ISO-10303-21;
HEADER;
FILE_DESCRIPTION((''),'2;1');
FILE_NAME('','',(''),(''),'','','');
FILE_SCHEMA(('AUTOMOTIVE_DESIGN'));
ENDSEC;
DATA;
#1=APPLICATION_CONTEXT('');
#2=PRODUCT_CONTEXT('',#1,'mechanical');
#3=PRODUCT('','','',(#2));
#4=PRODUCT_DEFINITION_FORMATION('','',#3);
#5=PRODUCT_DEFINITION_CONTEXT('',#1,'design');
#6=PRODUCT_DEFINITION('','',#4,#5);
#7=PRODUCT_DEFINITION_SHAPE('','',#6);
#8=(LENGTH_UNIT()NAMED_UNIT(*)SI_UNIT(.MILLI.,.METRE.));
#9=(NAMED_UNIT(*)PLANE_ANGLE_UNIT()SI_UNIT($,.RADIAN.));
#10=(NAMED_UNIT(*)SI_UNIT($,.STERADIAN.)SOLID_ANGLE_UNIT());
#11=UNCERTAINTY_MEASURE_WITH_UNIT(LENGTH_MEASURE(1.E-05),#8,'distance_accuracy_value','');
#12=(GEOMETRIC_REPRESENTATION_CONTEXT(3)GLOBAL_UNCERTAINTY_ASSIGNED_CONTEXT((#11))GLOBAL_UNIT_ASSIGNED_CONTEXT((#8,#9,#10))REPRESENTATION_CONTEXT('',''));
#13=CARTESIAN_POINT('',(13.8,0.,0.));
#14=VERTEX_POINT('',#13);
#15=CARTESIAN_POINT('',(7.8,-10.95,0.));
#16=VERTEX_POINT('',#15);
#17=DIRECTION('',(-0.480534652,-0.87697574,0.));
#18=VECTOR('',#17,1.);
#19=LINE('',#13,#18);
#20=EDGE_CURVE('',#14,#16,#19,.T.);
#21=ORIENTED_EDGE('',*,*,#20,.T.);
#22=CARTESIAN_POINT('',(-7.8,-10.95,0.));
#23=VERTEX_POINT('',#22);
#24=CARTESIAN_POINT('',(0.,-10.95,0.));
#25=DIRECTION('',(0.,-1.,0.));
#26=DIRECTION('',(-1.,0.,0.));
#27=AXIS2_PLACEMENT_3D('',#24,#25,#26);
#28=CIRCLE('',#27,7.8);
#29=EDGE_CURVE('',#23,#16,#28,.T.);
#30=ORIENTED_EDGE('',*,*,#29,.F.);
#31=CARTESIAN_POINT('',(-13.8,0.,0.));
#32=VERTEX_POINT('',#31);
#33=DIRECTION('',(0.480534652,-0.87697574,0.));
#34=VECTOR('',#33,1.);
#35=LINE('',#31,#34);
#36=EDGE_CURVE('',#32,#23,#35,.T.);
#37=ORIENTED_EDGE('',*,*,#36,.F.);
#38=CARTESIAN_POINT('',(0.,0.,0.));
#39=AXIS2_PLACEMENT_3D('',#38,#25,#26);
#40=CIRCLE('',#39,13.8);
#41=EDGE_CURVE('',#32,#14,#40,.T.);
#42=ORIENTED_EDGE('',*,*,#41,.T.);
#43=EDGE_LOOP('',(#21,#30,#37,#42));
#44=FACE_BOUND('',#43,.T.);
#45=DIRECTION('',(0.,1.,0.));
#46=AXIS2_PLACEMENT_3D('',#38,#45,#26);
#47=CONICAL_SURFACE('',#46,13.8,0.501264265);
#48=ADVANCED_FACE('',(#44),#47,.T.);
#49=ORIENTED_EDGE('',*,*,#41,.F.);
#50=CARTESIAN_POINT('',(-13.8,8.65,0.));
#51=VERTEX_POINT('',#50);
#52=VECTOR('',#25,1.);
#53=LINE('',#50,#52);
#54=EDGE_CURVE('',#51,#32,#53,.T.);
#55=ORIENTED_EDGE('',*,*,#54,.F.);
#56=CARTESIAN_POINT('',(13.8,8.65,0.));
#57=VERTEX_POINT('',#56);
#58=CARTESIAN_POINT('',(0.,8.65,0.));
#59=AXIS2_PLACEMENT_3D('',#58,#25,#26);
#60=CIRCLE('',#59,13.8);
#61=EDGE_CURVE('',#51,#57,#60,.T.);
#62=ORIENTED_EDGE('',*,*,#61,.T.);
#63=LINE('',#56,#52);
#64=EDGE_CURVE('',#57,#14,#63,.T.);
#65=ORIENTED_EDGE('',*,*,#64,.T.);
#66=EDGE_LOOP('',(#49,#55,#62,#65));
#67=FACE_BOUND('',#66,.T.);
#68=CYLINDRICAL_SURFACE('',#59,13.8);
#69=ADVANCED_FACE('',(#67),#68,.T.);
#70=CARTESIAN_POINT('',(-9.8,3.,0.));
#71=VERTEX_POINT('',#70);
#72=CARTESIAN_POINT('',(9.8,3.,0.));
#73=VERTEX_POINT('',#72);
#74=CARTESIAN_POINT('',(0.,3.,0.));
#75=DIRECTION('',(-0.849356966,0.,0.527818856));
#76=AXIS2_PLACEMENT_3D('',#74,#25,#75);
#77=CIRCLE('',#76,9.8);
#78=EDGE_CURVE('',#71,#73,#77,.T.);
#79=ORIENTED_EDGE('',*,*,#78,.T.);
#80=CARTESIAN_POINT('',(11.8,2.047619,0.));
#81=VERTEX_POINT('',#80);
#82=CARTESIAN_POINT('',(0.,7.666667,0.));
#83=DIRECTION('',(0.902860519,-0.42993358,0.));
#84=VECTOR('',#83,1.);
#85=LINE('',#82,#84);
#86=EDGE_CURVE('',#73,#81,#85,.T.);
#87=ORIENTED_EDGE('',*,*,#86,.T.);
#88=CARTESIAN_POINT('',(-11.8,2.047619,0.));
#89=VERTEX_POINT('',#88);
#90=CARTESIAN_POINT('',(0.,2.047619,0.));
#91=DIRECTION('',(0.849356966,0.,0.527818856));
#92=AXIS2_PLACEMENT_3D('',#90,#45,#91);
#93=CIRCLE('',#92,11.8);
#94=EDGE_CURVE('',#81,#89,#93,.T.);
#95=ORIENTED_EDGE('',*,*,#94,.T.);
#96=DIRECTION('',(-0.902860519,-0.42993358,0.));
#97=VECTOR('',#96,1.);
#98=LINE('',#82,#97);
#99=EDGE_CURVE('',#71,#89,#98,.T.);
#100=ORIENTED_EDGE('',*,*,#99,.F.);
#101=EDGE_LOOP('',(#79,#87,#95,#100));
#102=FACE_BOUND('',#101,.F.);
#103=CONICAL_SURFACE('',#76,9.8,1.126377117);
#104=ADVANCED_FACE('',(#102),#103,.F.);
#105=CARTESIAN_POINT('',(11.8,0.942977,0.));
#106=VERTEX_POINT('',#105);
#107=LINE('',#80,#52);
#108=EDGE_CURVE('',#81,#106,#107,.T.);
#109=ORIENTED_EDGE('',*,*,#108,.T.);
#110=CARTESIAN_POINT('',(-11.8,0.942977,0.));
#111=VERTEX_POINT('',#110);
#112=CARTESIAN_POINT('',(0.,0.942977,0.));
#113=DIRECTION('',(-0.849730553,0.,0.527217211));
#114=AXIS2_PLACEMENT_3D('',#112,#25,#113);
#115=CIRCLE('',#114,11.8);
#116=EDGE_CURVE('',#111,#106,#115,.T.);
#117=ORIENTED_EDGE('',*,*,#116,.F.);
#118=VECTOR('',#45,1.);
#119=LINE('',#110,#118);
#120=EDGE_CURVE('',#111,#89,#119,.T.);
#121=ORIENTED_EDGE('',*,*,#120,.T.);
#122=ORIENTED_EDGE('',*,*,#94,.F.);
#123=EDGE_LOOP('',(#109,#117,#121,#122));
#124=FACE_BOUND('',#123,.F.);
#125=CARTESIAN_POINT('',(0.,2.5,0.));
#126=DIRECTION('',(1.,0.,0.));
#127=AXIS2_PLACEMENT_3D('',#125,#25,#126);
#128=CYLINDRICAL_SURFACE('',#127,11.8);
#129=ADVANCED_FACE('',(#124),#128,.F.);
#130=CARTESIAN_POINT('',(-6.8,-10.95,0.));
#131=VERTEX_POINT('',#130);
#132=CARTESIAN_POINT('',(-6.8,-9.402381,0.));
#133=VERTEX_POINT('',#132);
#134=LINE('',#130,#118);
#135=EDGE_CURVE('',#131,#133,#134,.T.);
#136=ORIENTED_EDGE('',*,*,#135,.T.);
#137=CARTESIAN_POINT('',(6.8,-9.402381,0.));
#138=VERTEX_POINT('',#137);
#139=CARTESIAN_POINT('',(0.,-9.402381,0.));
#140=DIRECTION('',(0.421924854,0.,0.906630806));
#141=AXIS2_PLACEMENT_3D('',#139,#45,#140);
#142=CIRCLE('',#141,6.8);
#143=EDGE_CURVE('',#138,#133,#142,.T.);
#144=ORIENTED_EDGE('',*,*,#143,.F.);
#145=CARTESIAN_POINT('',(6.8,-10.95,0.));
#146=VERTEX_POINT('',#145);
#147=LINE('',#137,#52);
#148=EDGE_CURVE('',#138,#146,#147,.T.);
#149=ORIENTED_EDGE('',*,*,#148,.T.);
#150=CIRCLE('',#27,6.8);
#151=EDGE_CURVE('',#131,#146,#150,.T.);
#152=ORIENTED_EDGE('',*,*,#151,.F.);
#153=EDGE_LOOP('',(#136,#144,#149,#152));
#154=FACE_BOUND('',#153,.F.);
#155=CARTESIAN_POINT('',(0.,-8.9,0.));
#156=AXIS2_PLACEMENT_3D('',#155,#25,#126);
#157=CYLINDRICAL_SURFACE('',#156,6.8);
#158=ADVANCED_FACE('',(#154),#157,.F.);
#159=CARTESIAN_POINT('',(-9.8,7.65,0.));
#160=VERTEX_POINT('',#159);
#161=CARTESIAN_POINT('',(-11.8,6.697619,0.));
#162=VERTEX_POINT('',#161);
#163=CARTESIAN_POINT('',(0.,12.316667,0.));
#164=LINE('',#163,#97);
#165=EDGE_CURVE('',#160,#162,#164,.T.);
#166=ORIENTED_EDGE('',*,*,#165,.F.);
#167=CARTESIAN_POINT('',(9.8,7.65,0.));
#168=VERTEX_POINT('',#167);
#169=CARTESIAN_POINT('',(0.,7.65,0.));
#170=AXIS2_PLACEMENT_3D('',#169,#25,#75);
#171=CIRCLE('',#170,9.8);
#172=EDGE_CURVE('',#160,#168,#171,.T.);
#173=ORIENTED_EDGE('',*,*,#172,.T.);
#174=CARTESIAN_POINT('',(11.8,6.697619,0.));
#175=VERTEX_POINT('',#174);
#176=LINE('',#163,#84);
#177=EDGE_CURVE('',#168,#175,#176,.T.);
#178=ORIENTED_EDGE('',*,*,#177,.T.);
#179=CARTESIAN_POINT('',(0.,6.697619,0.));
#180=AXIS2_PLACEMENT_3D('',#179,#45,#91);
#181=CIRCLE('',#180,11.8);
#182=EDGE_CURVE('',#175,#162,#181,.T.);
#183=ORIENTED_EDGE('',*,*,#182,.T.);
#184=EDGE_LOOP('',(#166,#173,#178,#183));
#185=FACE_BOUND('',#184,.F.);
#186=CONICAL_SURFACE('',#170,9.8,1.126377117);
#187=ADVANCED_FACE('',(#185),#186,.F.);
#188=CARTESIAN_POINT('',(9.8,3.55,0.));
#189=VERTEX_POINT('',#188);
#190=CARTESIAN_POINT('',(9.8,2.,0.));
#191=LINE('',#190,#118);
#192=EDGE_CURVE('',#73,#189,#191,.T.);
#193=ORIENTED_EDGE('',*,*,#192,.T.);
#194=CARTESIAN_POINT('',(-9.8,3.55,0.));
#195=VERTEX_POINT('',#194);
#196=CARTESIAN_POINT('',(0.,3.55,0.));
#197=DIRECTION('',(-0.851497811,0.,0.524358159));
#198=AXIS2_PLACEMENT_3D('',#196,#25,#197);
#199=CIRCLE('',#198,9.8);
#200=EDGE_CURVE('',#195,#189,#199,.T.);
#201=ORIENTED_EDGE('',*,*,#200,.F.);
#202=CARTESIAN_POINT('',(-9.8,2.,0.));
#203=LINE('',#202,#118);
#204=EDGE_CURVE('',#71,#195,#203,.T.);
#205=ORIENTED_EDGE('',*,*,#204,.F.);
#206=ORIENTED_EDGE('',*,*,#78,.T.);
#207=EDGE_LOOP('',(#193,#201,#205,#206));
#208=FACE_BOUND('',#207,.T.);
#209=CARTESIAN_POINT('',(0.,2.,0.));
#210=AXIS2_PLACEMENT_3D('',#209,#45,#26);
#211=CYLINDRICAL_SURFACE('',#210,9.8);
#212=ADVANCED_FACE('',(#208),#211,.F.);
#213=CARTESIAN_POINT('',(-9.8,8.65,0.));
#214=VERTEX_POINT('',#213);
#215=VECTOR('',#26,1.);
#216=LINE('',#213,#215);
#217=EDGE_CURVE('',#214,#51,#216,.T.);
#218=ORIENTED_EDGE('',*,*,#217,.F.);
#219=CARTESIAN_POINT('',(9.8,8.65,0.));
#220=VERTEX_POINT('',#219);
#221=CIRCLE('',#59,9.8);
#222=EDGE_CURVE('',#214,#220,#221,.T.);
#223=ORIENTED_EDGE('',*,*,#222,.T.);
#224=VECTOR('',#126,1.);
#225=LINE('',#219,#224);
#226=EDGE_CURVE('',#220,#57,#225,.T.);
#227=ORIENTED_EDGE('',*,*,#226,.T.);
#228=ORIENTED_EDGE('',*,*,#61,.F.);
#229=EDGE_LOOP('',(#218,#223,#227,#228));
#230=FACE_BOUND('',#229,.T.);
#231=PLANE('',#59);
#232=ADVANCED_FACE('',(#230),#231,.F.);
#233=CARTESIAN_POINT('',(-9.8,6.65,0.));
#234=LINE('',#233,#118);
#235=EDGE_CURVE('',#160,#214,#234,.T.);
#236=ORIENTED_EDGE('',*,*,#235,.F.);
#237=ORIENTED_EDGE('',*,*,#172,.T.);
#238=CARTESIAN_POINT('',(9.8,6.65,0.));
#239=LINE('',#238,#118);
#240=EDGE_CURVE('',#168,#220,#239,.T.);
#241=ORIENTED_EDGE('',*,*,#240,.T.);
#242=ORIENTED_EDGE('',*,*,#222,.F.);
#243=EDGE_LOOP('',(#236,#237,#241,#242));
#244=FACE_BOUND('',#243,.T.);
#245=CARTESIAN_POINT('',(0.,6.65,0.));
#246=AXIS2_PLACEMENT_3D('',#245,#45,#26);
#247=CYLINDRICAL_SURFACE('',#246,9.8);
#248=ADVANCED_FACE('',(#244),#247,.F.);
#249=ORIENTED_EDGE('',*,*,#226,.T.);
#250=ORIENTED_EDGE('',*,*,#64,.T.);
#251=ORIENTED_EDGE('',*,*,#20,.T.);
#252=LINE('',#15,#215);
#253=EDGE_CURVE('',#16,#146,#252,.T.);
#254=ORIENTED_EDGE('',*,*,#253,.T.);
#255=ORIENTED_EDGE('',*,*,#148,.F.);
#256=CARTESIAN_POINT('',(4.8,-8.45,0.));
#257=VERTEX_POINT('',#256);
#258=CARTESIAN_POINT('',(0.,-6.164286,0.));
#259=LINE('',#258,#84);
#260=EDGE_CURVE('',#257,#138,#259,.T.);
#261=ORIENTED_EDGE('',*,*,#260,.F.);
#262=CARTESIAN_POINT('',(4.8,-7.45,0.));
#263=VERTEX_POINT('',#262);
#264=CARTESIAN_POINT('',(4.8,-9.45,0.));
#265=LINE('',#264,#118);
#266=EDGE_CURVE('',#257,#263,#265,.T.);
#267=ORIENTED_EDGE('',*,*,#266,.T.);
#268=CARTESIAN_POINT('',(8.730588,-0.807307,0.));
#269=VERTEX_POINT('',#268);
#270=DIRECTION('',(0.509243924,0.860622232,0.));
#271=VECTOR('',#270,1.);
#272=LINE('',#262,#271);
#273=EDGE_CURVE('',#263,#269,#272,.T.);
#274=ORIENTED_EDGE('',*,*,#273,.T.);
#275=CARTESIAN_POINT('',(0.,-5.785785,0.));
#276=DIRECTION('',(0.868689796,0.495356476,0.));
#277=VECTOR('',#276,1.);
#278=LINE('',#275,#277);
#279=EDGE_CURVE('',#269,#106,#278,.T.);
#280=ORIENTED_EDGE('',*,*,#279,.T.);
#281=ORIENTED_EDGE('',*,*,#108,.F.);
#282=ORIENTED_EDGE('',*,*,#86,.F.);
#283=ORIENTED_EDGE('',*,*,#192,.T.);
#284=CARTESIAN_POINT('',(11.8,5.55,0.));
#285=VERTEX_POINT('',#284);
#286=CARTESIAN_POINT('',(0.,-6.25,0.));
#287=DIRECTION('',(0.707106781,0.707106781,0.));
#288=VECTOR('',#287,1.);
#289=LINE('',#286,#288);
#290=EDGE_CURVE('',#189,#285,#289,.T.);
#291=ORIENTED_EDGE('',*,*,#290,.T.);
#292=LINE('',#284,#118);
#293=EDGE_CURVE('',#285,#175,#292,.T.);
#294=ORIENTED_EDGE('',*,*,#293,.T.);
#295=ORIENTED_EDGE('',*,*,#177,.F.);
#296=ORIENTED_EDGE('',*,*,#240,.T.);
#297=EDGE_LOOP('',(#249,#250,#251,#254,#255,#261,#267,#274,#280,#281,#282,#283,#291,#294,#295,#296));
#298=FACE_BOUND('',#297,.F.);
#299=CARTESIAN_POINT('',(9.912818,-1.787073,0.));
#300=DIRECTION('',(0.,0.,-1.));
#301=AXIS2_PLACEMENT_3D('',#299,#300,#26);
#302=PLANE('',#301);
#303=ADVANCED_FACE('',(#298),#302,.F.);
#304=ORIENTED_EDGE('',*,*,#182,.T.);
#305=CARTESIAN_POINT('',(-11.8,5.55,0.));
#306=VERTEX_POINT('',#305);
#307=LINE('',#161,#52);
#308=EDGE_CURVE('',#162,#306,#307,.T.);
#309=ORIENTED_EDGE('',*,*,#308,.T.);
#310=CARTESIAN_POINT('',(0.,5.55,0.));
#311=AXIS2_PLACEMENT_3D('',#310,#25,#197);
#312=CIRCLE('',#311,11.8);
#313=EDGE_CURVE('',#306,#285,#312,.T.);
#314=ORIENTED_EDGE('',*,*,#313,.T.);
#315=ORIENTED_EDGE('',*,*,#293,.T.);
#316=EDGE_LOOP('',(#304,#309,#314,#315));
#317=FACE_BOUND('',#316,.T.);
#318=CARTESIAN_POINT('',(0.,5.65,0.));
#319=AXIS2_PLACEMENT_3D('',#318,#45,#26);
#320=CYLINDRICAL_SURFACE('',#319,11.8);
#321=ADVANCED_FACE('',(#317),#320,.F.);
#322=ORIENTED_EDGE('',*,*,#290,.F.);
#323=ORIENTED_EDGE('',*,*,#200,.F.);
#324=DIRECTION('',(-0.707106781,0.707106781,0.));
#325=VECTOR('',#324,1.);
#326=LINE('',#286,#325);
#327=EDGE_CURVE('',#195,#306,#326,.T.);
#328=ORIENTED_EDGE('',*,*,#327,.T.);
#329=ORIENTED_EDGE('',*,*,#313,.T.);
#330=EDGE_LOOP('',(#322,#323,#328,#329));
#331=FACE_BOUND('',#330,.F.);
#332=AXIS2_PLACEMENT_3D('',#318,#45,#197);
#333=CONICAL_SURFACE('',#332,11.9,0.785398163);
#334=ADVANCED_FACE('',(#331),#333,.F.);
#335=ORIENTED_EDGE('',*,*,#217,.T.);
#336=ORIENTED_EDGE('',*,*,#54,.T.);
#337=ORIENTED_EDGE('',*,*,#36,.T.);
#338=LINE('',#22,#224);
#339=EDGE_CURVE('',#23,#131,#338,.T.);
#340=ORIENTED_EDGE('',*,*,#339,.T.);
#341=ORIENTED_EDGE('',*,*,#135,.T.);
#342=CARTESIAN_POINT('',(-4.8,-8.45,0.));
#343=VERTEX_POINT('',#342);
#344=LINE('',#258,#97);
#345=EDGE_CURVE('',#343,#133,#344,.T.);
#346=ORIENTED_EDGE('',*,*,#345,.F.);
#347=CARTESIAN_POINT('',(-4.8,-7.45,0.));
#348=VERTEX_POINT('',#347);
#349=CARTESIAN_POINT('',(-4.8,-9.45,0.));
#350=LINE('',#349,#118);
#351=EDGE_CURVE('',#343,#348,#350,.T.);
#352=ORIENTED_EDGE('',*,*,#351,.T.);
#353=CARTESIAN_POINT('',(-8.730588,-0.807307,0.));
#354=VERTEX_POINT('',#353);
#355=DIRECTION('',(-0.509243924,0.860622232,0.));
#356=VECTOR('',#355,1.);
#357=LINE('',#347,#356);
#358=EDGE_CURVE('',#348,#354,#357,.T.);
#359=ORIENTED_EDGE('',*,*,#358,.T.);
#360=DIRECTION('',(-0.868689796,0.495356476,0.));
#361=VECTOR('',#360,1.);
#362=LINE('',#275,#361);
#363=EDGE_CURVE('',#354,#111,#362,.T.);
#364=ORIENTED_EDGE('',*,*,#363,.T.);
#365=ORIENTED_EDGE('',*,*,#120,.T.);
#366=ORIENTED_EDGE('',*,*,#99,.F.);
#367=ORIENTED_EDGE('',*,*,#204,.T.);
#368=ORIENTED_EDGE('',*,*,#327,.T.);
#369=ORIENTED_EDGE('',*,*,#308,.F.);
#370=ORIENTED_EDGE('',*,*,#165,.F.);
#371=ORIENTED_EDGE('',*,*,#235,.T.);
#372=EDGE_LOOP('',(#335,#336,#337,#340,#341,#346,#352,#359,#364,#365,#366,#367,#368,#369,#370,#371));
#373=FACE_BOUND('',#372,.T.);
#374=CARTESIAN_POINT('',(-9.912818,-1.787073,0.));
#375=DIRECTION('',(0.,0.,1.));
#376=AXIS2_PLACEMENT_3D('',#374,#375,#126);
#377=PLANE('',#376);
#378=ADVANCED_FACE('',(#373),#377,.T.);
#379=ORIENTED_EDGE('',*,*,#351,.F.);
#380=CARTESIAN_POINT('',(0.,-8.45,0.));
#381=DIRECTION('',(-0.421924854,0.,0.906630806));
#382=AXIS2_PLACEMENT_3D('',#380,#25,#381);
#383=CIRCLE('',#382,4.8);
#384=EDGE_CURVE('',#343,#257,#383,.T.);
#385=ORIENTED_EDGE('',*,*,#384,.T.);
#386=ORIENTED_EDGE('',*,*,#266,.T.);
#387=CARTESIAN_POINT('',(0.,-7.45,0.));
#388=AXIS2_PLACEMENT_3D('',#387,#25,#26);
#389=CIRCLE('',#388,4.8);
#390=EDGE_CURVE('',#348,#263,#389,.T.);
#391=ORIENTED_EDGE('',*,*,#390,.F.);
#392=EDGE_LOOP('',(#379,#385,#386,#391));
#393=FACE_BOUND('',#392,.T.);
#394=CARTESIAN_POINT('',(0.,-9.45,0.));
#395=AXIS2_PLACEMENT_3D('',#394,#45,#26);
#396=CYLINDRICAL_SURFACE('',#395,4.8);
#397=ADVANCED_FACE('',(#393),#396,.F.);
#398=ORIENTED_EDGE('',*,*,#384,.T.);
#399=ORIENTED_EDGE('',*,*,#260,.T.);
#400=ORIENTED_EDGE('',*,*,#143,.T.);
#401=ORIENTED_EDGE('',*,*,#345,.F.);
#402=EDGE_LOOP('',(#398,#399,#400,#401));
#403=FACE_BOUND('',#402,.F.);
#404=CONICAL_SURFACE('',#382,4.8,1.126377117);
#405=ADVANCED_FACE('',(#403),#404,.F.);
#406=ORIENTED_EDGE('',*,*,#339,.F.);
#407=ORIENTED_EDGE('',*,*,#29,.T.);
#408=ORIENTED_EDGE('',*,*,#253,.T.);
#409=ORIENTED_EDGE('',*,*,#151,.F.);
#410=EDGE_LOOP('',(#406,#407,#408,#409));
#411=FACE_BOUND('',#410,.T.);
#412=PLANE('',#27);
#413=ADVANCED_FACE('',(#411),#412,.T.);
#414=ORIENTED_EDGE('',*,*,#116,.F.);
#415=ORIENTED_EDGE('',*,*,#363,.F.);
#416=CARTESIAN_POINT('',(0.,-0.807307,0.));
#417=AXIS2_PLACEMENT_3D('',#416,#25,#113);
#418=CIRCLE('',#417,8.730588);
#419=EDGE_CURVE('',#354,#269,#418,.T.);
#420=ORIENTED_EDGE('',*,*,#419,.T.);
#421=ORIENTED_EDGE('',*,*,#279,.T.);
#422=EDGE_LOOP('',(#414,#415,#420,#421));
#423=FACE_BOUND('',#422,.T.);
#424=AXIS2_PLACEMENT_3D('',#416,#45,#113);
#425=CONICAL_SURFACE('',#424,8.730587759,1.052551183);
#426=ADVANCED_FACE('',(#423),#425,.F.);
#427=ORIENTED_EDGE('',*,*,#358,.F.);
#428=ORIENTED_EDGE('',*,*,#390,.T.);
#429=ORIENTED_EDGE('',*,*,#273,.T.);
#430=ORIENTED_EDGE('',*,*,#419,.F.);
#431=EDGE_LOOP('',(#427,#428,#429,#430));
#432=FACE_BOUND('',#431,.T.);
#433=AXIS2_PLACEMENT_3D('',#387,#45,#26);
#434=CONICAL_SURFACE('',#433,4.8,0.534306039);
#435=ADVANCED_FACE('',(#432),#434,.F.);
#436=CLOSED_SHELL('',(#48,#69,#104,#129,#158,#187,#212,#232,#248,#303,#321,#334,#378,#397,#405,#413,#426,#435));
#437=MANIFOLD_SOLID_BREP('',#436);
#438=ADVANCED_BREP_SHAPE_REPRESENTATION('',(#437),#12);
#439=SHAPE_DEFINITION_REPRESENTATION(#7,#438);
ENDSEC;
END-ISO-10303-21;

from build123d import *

# Parameters (mm, degrees)
F1_ANGLE    = 180
F2_T4_ANGLE = 243.6352501502
F2_S5_R     = 11.8
F2_T6_DEPTH = 16
F3_T4_ANGLE = 243.2500896942
F3_S5_R     = 11.8
F3_T6_DEPTH = 16
F4_T4_ANGLE = 243.7164036037
F4_S5_R     = 11.8
F4_T6_DEPTH = 16
F5_T4_ANGLE = 243.7164036037
F5_S5_R     = 11.8
F5_T6_DEPTH = 16
F6_T4_ANGLE = 310.0876573575
F6_S5_R     = 6.8
F6_T6_DEPTH = 11


# Not quite as in the source:
# - a fillet or chamfer that OpenCascade refuses, or shapes differently, is made with other operations: its cross-section is extruded or revolved along the edge and cut away or added


with BuildPart() as f1:
    # F0 (on Top) → F1 (revolve)
    with BuildSketch(Plane.XY):
        Polygon((-11.8, 5.65), (-11.8, 6.65), (-13.8, 6.65), (-13.8, 0), (-7.8, -10.95), (-6.8, -10.95), (-6.8, -9.45), (-4.8, -9.45), (-4.8, -7.45), (-9.8, 1), (-11.8, 1), (-11.8, 2), (-9.8, 2), (-9.8, 5.65), align=None)
        Polygon((-13.8, 6.65), (-11.8, 6.65), (-9.8, 6.65), (-9.8, 8.65), (-13.8, 8.65), align=None)
    revolve(axis=Axis((0, 0, 0), (0, -1, 0)), revolution_arc=F1_ANGLE)

    # F2: chamfer of 2.1 on 1 edges, made by hand


with BuildPart() as f2_tool2:
    # F2_s3 → F2_t4 (revolve)
    with BuildSketch(Plane(origin=(0, 0, 0), x_dir=(0, 1, 0), z_dir=(0.5272172108, 0, 0.849730553))):
        Polygon((-0.8073066866, 8.7305877594), (1, 11.9), (1, 9.8), align=None)
    revolve(axis=Axis((0, 1, 0), (0, -1, 0)), revolution_arc=F2_T4_ANGLE)

    # F2_s5 → F2_t6 (intersect, symmetric)
    with BuildSketch(Plane.XZ.offset(-0.1)):
        Circle(F2_S5_R)
    extrude(amount=F2_T6_DEPTH, both=True, mode=Mode.INTERSECT)


with BuildPart() as f1_1:
    add(f1.part)

    # F2_t1: cut F2_tool2
    add(f2_tool2.part, mode=Mode.SUBTRACT)

    # F3: chamfer of 2.1 on 1 edges, made by hand


with BuildPart() as f3_tool2:
    # F3_s3 → F3_t4 (revolve)
    with BuildSketch(Plane(origin=(0, 0, 0), x_dir=(0, 1, 0), z_dir=(0.5243581586, 0, 0.8514978107))):
        Polygon((5.65, 11.9), (3.55, 9.8), (5.65, 9.8), align=None)
    revolve(axis=Axis((0, 5.65, 0), (0, -1, 0)), revolution_arc=F3_T4_ANGLE)

    # F3_s5 → F3_t6 (intersect, symmetric)
    with BuildSketch(Plane.XZ.offset(-4.6)):
        Circle(F3_S5_R)
    extrude(amount=F3_T6_DEPTH, both=True, mode=Mode.INTERSECT)


with BuildPart() as f1_2:
    add(f1_1.part)

    # F3_t1: cut F3_tool2
    add(f3_tool2.part, mode=Mode.SUBTRACT)

    # F4: chamfer of 2.1 x 1 on 1 edges, made by hand


with BuildPart() as f4_tool2:
    # F4_s3 → F4_t4 (revolve)
    with BuildSketch(Plane(origin=(0, 0, 0), x_dir=(0, 1, 0), z_dir=(0.5278188556, 0, 0.849356966))):
        Polygon((7.65, 9.8), (6.65, 11.9), (6.65, 9.8), align=None)
    revolve(axis=Axis((0, 6.65, 0), (0, -1, 0)), revolution_arc=F4_T4_ANGLE)

    # F4_s5 → F4_t6 (intersect, symmetric)
    with BuildSketch(Plane.XZ.offset(-7.2)):
        Circle(F4_S5_R)
    extrude(amount=F4_T6_DEPTH, both=True, mode=Mode.INTERSECT)


with BuildPart() as f1_3:
    add(f1_2.part)

    # F4_t1: cut F4_tool2
    add(f4_tool2.part, mode=Mode.SUBTRACT)

    # F5: chamfer of 2.1 x 1 on 1 edges, made by hand


with BuildPart() as f5_tool2:
    # F5_s3 → F5_t4 (revolve)
    with BuildSketch(Plane(origin=(0, 0, 0), x_dir=(0, 1, 0), z_dir=(0.5278188556, 0, 0.849356966))):
        Polygon((3, 9.8), (2, 11.9), (2, 9.8), align=None)
    revolve(axis=Axis((0, 2, 0), (0, -1, 0)), revolution_arc=F5_T4_ANGLE)

    # F5_s5 → F5_t6 (intersect, symmetric)
    with BuildSketch(Plane.XZ.offset(-2.5)):
        Circle(F5_S5_R)
    extrude(amount=F5_T6_DEPTH, both=True, mode=Mode.INTERSECT)


with BuildPart() as f1_4:
    add(f1_3.part)

    # F5_t1: cut F5_tool2
    add(f5_tool2.part, mode=Mode.SUBTRACT)

    # F6: chamfer of 2.1 x 1 on 1 edges, made by hand


with BuildPart() as f6_tool2:
    # F6_s3 → F6_t4 (revolve)
    with BuildSketch(Plane(origin=(0, 0, 0), x_dir=(0, 1, 0), z_dir=(0.9066308057, 0, 0.4219248537))):
        Polygon((-8.45, 4.8), (-9.45, 6.9), (-9.45, 4.8), align=None)
    revolve(axis=Axis((0, -9.45, 0), (0, -1, 0)), revolution_arc=F6_T4_ANGLE)

    # F6_s5 → F6_t6 (intersect, symmetric)
    with BuildSketch(Plane.XZ.offset(8.9)):
        Circle(F6_S5_R)
    extrude(amount=F6_T6_DEPTH, both=True, mode=Mode.INTERSECT)


with BuildPart() as f1_5:
    add(f1_4.part)

    # F6_t1: cut F6_tool2
    add(f6_tool2.part, mode=Mode.SUBTRACT)


solid = f1_5.part
